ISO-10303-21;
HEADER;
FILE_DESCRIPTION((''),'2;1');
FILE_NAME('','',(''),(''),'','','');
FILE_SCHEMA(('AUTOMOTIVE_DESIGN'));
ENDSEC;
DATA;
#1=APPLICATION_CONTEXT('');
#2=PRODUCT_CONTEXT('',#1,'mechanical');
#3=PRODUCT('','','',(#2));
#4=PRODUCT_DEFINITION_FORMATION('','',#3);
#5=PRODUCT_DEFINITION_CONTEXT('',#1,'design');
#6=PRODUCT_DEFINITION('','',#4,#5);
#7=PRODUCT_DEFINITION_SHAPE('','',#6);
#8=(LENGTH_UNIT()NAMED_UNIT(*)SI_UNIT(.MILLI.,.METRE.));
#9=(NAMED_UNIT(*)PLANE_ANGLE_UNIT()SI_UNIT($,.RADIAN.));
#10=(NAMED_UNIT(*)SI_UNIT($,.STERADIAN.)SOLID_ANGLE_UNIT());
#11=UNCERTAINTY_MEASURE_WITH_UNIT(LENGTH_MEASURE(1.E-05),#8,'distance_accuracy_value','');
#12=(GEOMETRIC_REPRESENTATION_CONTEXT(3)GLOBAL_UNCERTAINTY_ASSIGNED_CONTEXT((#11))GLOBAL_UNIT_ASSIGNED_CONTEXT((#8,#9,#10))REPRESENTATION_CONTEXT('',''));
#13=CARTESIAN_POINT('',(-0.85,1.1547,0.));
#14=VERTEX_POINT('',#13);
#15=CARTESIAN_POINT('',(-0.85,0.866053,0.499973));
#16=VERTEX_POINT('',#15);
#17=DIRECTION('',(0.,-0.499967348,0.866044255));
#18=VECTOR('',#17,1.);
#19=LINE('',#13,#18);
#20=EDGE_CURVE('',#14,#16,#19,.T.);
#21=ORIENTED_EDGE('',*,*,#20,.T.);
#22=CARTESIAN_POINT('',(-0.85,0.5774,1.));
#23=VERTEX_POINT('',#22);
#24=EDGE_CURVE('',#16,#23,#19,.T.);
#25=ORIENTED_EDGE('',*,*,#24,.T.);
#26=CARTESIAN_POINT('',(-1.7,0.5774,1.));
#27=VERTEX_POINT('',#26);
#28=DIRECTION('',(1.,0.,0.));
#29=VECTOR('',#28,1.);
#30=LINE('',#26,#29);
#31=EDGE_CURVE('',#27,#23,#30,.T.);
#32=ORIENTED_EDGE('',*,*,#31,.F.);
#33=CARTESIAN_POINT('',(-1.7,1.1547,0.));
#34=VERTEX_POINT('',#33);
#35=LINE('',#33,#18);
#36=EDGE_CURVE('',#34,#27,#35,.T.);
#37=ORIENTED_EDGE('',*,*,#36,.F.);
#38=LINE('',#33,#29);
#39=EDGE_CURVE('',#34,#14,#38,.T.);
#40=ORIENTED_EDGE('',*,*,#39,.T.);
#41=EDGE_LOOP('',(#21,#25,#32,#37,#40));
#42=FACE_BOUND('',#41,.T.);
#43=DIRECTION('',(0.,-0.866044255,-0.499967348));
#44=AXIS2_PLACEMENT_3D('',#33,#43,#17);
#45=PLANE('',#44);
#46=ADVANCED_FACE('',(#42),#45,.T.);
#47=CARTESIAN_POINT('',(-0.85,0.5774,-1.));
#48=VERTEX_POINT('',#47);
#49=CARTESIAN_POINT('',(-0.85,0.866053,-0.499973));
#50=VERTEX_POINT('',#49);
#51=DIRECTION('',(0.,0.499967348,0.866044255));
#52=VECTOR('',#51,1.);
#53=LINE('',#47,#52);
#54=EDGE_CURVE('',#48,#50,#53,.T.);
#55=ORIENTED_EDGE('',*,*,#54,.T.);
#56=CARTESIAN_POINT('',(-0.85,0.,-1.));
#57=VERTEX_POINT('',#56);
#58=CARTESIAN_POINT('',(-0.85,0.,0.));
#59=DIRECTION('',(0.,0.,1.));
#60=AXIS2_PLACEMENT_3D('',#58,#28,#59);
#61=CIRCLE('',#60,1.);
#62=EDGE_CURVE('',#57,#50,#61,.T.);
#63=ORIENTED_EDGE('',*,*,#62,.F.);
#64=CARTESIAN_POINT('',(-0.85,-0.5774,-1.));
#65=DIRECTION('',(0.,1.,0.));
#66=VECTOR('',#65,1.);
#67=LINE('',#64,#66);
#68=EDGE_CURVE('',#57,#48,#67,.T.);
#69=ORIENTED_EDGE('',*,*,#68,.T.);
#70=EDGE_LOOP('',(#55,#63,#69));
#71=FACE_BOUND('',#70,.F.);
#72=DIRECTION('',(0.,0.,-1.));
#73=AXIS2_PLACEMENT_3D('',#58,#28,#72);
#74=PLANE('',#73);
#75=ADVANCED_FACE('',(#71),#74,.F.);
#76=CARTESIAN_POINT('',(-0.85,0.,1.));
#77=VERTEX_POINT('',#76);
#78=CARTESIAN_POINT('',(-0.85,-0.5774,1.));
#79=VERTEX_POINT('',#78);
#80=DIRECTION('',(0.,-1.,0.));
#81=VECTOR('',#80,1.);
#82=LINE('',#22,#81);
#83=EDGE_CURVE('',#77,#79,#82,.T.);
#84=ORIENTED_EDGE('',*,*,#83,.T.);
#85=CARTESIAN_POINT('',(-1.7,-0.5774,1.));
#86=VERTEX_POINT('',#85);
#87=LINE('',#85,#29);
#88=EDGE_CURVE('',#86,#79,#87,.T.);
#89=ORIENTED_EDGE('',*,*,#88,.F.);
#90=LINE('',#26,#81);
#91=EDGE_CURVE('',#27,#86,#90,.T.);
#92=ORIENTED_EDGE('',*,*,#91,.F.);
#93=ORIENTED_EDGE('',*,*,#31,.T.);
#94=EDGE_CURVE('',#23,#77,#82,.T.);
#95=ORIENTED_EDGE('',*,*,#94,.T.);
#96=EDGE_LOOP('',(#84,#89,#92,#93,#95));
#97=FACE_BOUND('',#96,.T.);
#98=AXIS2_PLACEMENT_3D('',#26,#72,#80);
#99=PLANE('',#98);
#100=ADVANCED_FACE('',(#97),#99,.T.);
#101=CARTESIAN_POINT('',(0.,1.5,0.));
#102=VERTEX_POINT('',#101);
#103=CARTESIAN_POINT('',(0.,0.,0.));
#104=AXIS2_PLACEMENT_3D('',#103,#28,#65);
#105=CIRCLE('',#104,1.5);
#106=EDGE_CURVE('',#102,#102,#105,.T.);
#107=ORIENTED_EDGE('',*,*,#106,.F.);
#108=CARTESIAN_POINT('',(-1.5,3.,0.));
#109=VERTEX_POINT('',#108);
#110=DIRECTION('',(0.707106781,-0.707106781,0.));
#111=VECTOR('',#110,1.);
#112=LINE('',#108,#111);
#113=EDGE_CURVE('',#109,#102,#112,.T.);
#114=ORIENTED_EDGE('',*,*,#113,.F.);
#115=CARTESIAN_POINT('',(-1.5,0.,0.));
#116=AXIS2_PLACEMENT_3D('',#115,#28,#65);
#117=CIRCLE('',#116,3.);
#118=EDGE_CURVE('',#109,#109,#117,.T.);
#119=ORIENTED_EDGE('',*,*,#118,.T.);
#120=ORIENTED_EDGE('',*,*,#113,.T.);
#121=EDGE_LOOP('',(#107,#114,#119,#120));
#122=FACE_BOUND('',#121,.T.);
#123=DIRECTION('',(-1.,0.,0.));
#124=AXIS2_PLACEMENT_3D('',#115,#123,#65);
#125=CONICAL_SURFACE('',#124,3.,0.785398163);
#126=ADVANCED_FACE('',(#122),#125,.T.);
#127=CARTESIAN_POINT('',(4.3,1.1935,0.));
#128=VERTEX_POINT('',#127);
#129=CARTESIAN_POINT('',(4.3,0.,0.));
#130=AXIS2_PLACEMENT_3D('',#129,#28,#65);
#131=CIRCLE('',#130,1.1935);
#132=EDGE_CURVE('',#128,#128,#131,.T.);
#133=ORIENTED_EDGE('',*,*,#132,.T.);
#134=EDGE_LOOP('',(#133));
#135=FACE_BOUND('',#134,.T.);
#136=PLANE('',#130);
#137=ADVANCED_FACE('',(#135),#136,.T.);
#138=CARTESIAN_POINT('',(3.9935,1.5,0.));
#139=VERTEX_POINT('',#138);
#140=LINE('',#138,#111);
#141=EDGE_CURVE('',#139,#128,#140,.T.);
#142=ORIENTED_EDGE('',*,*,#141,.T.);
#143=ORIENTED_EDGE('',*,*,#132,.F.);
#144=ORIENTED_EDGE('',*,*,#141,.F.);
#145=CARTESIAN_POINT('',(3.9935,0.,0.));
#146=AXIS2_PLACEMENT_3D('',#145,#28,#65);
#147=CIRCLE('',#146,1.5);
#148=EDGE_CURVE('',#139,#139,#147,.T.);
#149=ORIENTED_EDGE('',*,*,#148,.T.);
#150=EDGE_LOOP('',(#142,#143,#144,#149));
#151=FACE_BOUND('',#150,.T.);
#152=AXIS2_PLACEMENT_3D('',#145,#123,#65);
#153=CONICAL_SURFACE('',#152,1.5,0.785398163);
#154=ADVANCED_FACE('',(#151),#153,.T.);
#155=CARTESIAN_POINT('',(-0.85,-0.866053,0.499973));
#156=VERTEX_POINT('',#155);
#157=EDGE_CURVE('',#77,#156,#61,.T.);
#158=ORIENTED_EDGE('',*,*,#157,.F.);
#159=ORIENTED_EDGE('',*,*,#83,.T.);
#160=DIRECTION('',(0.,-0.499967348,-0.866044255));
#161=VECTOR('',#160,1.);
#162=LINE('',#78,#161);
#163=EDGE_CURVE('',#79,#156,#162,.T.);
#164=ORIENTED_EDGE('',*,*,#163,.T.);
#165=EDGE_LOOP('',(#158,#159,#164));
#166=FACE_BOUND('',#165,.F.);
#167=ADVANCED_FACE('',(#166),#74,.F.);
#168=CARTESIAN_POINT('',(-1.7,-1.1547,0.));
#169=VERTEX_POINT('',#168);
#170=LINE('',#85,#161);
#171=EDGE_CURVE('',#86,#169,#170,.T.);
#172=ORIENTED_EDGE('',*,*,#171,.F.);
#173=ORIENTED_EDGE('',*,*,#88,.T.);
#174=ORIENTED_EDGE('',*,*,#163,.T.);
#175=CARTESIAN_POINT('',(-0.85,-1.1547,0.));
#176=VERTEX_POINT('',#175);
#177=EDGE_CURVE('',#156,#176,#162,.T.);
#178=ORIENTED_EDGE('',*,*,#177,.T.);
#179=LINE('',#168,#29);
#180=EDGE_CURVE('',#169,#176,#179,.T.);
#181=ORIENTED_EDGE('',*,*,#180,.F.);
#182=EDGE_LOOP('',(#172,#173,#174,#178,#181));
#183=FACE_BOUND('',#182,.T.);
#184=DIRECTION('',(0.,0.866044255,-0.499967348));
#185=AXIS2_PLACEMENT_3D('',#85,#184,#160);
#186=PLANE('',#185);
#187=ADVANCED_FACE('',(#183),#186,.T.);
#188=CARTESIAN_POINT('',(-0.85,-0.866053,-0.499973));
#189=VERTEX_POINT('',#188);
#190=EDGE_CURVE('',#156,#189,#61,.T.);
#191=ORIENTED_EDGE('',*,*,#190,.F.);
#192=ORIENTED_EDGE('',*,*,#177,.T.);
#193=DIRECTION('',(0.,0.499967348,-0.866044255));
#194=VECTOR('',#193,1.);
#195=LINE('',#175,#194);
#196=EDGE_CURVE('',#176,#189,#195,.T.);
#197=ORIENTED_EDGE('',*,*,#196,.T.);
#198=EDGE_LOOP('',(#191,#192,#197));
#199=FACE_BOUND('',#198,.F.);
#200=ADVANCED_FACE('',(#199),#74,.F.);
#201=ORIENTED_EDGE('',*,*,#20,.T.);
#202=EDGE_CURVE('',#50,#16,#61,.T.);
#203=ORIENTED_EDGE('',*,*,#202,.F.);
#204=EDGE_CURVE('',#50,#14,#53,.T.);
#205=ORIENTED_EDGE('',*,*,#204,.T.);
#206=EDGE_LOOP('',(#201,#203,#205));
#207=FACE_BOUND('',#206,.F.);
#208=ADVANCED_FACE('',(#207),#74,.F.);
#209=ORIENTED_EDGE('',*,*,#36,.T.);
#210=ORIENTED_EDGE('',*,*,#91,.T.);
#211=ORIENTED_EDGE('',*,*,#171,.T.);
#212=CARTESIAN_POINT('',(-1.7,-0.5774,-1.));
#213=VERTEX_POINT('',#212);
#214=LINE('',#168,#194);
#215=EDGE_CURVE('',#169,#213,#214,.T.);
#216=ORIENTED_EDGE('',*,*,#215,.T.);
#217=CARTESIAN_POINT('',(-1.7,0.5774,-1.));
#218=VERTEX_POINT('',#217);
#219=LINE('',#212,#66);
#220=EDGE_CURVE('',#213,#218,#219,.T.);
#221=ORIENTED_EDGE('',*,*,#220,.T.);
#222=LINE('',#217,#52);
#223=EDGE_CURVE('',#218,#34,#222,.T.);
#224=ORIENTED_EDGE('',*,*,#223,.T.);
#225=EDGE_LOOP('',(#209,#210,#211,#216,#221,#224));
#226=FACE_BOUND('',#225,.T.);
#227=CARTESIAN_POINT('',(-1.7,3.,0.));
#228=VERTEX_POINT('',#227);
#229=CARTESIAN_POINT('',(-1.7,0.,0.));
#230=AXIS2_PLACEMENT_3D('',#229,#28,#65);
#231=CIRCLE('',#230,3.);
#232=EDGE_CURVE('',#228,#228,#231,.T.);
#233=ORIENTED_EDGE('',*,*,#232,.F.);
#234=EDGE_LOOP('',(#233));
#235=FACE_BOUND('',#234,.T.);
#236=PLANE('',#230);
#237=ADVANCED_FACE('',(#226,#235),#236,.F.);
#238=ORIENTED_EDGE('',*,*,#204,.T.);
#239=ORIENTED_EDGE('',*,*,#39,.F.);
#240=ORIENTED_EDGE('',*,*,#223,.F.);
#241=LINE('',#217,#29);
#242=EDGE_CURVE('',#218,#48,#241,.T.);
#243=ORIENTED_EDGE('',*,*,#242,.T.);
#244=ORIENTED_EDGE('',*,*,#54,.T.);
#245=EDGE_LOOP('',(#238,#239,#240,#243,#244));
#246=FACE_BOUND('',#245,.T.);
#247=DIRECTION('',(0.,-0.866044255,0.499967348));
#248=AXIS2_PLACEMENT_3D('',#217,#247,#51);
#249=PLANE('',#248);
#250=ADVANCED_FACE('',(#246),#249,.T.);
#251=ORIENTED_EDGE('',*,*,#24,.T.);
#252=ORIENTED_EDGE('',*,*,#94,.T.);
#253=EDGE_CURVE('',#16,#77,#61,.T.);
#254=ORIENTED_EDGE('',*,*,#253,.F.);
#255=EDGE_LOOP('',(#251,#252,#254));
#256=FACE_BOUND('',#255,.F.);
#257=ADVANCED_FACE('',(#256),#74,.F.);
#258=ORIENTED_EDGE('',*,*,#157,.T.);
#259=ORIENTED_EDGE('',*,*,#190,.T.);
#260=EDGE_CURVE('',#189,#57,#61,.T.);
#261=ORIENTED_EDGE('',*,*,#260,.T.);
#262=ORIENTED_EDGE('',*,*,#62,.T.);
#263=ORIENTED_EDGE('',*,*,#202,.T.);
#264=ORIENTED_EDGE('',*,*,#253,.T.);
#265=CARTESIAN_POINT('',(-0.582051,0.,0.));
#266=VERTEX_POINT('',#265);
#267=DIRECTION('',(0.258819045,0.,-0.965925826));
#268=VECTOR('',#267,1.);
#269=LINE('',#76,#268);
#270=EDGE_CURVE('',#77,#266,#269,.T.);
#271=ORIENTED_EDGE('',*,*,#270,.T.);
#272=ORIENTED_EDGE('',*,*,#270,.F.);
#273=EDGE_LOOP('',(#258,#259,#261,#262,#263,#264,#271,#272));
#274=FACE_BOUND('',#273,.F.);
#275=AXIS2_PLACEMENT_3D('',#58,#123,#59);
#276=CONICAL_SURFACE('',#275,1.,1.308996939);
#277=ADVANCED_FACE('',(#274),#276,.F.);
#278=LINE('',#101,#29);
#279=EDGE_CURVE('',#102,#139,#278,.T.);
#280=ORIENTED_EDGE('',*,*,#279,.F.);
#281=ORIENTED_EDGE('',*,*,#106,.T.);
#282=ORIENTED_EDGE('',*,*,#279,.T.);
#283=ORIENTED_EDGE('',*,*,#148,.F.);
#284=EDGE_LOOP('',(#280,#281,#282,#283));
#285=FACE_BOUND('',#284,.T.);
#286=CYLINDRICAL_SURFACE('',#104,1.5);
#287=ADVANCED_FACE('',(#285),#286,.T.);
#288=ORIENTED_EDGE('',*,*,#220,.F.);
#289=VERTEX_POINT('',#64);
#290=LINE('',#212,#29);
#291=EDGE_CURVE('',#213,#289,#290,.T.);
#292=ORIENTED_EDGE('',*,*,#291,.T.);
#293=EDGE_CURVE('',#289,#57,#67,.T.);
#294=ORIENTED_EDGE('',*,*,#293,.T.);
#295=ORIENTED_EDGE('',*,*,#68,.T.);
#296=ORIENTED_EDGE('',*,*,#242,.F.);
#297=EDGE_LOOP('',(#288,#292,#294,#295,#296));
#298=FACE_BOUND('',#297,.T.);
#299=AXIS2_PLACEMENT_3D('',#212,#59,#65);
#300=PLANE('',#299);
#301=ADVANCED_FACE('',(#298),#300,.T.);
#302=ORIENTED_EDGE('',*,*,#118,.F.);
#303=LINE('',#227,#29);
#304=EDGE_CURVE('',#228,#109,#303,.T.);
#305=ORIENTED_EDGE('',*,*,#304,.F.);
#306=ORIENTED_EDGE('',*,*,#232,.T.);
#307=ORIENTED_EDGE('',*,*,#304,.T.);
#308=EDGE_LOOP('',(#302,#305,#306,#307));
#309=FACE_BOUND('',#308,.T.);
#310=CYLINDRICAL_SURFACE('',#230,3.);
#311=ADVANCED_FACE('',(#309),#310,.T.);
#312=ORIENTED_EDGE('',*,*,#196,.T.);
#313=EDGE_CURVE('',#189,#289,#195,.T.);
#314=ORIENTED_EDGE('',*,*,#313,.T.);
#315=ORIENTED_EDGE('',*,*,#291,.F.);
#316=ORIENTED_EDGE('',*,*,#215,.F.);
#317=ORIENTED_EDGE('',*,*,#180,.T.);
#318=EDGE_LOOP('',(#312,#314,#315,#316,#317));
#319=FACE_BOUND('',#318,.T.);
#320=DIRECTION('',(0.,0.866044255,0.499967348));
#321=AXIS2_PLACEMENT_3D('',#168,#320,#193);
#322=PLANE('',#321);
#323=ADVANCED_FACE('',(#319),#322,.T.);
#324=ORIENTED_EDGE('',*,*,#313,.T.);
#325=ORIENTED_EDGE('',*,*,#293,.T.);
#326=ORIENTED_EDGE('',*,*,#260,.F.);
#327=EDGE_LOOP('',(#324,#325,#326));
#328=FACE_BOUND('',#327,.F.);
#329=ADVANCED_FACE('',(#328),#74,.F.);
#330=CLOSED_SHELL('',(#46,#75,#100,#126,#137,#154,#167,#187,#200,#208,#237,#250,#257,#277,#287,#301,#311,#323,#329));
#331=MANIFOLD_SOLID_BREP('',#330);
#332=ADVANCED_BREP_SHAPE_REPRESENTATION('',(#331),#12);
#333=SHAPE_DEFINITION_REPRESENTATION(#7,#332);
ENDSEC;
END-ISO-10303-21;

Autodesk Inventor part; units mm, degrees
sketch "Sketch_1" plane through (0, 0, 0) normal (0, 0, 1) x (1, 0, 0)
  line L0 (4.3, 0) -> (0, 0)
  line L1 (-1.7, 0) -> (-1.7, 3)
  line L2 (-1.7, 3) -> (-1.5, 3)
  line L3 (-1.5, 3) -> (0, 1.5)
  line L4 (0, 1.5) -> (3.9935, 1.5)
  line L5 (3.9935, 1.5) -> (4.3, 1.1935)
  line L6 (4.3, 1.1935) -> (4.3, 0)
  line L7 (4.3, 0) -> (-1.7, 0)
revolve "Revolution1" add sketch "Sketch_1" angle 360 about axis through (4.3, 0, 0) along (1, 0, 0)
thread "Thread1" size "M3x0.5" class "6g" standard "ISO Metric profile" length 3.4935
sketch "Sketch2" plane through (-1.7, 0, 0) normal (-1, 0, 0) x (0, 0, 1)
  point P0 (0, 0)
hole "Hole1" at (-1.7, 0, 0) direction (1, 0, 0) diameter 2 depth 0.85 tip angle 150
sketch "Sketch_3" plane through (-1.7, 0, 0) normal (1, 0, 0) x (0, 0, -1)
  line L0 (-1, -0.5774) -> (0, -1.1547)
  line L1 (0, -1.1547) -> (1, -0.5774)
  line L2 (1, -0.5774) -> (1, 0.5774)
  line L3 (1, 0.5774) -> (0, 1.1547)
  line L4 (0, 1.1547) -> (-1, 0.5774)
  line L5 (-1, 0.5774) -> (-1, -0.5774)
extrude "Extrusion1" cut sketch "Sketch_3" along normal blind 0.85
ref_plane "bolt_to_nut_XY" through (4.3, 0, 0) normal (1, 0, 0) x (0, 0, -1)
ref_plane "bolt_to_nut_YZ" through (4.3, 0, 0) normal (0, 0, -1) x (0, 1, 0)
ref_plane "bolt_to_nut_ZX" through (4.3, 0, 0) normal (0, 1, 0) x (1, 0, 0)
ref_plane "dummy_to_bolt_XY" through (0, 0, 0) normal (1, 0, 0) x (0, 0, -1)
ref_plane "dummy_to_bolt_YZ" through (0, 0, 0) normal (0, 0, -1) x (0, 1, 0)
ref_plane "dummy_to_bolt_ZX" through (0, 0, 0) normal (0, 1, 0) x (1, 0, 0)
properties part number "HFBCM3-6"
